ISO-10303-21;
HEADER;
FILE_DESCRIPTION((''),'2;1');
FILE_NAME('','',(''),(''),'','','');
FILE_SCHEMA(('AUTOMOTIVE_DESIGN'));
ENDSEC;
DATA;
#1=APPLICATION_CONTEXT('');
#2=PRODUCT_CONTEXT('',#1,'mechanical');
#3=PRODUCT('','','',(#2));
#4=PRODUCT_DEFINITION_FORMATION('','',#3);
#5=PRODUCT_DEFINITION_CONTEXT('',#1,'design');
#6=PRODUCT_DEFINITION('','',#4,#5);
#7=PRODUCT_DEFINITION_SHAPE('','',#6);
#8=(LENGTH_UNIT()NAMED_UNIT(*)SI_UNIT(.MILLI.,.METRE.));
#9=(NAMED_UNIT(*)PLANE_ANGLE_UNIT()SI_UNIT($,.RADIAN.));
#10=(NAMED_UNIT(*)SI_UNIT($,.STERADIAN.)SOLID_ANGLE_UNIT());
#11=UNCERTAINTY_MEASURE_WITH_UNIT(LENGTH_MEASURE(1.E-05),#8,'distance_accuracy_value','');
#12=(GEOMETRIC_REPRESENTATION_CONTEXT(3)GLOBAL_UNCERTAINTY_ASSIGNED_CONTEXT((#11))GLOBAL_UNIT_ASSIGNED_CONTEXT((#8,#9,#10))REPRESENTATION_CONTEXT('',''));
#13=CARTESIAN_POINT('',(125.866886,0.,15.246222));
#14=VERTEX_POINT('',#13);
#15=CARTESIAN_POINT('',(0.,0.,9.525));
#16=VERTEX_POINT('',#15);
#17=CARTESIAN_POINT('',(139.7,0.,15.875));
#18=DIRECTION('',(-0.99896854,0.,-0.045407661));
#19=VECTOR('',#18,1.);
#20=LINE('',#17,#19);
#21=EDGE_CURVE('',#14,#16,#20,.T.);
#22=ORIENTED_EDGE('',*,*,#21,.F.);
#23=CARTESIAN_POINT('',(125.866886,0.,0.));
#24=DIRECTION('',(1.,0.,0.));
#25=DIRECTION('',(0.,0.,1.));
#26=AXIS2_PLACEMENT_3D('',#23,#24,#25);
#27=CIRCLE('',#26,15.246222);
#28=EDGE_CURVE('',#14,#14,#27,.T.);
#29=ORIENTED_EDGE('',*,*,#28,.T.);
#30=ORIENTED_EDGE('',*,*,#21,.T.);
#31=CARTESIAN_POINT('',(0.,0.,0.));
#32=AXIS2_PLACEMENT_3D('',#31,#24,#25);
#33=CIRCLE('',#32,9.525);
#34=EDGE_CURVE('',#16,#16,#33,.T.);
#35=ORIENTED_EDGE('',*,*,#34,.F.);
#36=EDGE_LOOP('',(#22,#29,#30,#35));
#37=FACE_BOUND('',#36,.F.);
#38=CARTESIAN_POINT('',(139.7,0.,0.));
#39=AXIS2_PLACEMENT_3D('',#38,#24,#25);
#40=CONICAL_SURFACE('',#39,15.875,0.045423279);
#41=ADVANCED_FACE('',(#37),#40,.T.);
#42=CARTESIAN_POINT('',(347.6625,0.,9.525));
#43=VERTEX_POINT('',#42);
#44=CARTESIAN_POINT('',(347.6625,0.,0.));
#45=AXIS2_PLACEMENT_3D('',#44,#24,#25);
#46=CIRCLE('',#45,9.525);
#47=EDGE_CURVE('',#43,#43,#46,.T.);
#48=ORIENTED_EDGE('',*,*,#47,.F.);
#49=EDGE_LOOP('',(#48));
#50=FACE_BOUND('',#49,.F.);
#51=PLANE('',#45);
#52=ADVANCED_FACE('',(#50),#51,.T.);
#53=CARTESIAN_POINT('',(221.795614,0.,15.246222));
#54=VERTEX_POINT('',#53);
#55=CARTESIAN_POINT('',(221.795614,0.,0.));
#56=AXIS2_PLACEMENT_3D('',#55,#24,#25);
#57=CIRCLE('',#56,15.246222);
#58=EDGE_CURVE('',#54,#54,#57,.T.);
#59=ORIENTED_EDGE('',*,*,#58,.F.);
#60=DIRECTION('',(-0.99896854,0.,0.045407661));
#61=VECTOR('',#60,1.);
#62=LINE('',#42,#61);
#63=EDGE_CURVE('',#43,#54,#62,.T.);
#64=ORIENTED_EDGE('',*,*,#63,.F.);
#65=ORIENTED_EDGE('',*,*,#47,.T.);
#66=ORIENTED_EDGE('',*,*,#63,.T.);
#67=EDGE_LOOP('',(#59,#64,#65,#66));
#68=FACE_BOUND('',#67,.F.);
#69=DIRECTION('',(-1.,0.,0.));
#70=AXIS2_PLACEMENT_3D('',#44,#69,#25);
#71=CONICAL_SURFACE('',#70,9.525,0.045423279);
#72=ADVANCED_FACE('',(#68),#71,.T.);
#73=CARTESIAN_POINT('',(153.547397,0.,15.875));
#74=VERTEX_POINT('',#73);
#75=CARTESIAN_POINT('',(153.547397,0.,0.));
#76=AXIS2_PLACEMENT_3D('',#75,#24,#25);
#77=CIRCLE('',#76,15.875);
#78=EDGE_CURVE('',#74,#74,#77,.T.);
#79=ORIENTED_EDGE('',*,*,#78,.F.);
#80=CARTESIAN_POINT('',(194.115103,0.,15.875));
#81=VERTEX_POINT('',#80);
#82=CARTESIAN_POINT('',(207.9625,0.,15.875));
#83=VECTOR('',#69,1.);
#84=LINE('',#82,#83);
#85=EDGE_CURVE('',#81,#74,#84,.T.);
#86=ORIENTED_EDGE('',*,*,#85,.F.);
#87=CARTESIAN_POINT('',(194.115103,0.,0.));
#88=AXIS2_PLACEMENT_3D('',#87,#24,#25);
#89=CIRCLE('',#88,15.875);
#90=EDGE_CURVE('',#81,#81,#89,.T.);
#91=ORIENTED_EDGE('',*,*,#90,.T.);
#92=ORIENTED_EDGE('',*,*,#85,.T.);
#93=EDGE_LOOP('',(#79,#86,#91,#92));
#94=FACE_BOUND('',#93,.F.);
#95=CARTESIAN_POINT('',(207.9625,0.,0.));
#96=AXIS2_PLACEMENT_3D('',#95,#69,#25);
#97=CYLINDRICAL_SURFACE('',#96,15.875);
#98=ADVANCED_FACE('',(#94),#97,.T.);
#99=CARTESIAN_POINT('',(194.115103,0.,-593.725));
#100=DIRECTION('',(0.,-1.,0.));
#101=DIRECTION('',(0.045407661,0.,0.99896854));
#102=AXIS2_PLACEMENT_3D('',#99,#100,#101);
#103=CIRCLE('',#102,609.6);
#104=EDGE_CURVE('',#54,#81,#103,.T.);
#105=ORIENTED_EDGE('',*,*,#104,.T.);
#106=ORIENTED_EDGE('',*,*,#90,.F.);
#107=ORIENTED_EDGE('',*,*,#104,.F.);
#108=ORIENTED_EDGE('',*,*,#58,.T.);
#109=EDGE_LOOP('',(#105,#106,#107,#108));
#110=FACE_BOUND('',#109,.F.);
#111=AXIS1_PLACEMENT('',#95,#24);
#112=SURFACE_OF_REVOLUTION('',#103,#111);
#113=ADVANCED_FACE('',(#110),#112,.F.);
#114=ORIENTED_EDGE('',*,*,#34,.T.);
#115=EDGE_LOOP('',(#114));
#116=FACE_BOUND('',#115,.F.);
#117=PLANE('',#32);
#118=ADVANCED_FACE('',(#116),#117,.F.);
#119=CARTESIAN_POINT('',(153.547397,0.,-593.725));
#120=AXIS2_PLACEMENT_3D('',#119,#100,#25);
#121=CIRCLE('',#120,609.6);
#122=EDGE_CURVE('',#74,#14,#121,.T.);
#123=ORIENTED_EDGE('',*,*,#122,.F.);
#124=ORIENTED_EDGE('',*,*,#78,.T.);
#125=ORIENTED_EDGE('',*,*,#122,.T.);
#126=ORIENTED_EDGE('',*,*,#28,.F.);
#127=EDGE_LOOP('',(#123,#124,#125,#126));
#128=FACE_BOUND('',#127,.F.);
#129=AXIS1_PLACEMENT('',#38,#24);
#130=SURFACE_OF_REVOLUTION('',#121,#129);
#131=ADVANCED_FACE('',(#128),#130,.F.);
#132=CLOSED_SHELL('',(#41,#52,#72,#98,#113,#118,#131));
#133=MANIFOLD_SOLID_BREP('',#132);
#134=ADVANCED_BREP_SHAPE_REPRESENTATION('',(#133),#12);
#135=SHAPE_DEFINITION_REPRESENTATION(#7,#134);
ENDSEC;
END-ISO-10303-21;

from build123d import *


# Not quite as in the source:
# - a fillet or chamfer that OpenCascade refuses, or shapes differently, is made with other operations: its cross-section is extruded or revolved along the edge and cut away or added


with BuildPart() as f1:
    # F0 (on Front) → F1 (revolve)
    with BuildSketch(Plane.XZ):
        Polygon((0, 9.525), (0, 0), (347.6625, 0), (347.6625, 9.525), (207.9625, 15.875), (139.7, 15.875), align=None)
    revolve(axis=Axis((173.83125, 0, 0), (1, 0, 0)))

    # F2: fillet of radius 609.6 on 2 edges, made by hand

    # F2_s1 → F2_t2 (revolve, cut)
    with BuildSketch(Plane.XZ):
        with BuildLine():
            ThreePointArc((153.5473965644, 15.875), (139.7035712187, 15.7177852553), (125.8668864684, 15.2462221122))
            Line((125.8668864684, 15.2462221122), (139.7, 15.875))
            Line((139.7, 15.875), (153.5473965644, 15.875))
        make_face()
    revolve(axis=Axis((139.7, 0, 0), (1, 0, 0)), mode=Mode.SUBTRACT)

    # F2_s3 → F2_t4 (revolve, cut)
    with BuildSketch(Plane.XZ):
        with BuildLine():
            ThreePointArc((221.7956135316, 15.2462221122), (207.9589287813, 15.7177852553), (194.1151034356, 15.875))
            Line((194.1151034356, 15.875), (207.9625, 15.875))
            Line((207.9625, 15.875), (221.7956135316, 15.2462221122))
        make_face()
    revolve(axis=Axis((207.9625, 0, 0), (1, 0, 0)), mode=Mode.SUBTRACT)


solid = f1.part
